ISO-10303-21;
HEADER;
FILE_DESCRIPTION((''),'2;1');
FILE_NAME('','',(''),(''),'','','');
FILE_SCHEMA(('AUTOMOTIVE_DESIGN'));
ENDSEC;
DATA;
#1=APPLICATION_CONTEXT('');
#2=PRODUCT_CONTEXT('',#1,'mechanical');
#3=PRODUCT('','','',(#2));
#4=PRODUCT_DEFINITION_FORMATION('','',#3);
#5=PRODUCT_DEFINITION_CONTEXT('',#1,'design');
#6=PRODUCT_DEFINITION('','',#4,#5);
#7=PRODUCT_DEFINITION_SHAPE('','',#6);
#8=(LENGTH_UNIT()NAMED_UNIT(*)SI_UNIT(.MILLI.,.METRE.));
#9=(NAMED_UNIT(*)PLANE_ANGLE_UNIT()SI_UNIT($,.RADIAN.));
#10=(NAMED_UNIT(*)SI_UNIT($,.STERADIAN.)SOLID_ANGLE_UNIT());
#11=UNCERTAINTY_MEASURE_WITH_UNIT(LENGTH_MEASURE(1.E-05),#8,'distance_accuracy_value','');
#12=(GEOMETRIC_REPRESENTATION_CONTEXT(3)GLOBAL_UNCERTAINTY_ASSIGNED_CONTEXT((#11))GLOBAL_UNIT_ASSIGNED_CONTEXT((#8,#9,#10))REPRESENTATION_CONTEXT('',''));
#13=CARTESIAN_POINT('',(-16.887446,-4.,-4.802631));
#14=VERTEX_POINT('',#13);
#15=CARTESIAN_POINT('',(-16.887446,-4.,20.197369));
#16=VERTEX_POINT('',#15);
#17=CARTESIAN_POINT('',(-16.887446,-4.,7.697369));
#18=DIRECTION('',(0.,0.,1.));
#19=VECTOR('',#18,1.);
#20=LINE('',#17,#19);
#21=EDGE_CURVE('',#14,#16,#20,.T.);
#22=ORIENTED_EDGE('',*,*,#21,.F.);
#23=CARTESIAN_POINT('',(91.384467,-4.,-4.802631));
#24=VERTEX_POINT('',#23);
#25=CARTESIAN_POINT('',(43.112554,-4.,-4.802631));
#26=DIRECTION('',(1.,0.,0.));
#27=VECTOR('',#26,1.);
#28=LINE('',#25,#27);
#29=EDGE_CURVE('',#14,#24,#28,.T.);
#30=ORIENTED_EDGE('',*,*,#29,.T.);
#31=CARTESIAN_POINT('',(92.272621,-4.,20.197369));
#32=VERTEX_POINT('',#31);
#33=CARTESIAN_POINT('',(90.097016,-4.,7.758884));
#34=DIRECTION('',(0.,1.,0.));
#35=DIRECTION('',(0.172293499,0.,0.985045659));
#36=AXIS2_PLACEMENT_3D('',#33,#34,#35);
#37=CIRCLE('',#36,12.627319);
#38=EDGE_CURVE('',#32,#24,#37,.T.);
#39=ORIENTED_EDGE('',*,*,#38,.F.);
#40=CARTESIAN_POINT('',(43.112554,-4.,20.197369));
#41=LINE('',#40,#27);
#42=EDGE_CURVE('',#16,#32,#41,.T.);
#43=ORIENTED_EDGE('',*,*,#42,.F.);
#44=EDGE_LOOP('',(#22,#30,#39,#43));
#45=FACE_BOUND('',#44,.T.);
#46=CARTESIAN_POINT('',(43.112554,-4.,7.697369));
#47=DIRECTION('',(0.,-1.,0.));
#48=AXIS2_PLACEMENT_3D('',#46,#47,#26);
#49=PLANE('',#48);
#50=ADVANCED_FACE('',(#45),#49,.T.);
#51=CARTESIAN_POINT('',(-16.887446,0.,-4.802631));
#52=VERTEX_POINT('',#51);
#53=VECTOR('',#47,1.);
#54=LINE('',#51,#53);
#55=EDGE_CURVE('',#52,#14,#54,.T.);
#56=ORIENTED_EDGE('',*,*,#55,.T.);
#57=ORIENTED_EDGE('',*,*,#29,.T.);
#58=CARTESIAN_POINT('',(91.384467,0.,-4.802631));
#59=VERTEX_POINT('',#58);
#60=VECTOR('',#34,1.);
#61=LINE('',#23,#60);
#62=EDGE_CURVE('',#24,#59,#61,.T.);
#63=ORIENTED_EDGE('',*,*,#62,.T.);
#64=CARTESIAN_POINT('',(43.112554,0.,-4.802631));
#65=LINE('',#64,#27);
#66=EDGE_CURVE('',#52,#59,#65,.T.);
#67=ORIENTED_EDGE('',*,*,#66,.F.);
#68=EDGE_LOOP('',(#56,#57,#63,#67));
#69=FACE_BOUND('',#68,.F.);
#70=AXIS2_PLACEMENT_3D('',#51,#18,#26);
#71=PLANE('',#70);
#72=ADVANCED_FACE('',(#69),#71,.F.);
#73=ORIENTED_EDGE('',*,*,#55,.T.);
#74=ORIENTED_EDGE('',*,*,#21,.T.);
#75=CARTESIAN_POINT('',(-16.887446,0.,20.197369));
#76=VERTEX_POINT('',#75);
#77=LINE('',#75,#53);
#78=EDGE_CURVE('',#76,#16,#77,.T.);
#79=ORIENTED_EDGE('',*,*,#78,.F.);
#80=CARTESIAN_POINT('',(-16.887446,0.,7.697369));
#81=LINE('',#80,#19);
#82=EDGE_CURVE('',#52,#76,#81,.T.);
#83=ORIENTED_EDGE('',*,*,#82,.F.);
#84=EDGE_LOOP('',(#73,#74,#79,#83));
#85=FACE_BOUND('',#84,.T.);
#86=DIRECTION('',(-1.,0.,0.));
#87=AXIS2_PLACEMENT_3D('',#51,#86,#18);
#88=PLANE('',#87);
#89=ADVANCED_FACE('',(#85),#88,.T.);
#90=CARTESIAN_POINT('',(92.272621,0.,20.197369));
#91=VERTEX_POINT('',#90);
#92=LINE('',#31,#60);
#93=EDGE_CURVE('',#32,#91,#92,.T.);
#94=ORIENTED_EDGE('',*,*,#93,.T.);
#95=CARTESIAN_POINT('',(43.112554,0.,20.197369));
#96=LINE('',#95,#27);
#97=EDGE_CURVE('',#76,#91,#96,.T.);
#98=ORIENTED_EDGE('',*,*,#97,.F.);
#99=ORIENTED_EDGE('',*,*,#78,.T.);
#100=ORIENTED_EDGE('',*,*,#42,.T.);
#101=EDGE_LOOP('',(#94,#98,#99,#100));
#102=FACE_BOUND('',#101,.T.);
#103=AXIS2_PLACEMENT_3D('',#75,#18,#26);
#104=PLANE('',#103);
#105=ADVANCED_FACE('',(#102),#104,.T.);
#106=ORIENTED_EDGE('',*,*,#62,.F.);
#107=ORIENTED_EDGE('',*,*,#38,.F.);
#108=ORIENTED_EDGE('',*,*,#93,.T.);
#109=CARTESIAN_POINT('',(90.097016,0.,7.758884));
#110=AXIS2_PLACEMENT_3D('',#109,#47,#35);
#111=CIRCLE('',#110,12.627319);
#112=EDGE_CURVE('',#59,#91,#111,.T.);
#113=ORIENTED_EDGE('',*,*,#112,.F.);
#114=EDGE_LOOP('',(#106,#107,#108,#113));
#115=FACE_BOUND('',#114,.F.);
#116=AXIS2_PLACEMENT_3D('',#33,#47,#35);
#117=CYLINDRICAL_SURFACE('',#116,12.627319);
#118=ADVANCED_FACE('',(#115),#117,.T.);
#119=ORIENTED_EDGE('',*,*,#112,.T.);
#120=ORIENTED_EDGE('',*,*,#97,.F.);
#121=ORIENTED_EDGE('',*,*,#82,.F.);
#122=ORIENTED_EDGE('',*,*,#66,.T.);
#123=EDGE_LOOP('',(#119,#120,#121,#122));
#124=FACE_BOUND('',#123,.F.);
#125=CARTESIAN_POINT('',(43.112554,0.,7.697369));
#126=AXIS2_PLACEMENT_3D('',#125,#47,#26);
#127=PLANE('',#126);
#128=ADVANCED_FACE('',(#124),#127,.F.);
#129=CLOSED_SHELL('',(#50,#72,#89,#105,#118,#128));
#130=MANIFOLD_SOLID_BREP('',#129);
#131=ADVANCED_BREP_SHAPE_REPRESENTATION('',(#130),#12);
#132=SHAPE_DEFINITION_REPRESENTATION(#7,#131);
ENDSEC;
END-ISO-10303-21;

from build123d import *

# Parameters (mm, degrees)
F0_W     = 120
F0_H     = 25
F1_DEPTH = 4
F3_DEPTH = 4.001


# Not quite as in the source:
# - a feature of the source that left no trace in its solid (it failed there, or was rolled back) is left out


with BuildPart() as f1:
    # F0 (on Front) → F1 (new body)
    with BuildSketch(Plane.XZ):
        with Locations((43.1125537308, 7.697368972)):
            Rectangle(F0_W, F0_H)
    extrude(amount=F1_DEPTH)

    # F2 (on face) → F3 (cut, through all)
    with BuildSketch(Plane.XZ.offset(4)):
        with BuildLine():
            ThreePointArc((92.2726206475, 20.197368972), (102.716373437, 7.3105662294), (91.3844667368, -4.802631028))
            Line((91.3844667368, -4.802631028), (103.1125537308, -4.802631028))
            Line((103.1125537308, -4.802631028), (103.1125537308, 20.197368972))
            Line((103.1125537308, 20.197368972), (92.2726206475, 20.197368972))
        make_face()
    extrude(amount=-F3_DEPTH, mode=Mode.SUBTRACT)


solid = f1.part
